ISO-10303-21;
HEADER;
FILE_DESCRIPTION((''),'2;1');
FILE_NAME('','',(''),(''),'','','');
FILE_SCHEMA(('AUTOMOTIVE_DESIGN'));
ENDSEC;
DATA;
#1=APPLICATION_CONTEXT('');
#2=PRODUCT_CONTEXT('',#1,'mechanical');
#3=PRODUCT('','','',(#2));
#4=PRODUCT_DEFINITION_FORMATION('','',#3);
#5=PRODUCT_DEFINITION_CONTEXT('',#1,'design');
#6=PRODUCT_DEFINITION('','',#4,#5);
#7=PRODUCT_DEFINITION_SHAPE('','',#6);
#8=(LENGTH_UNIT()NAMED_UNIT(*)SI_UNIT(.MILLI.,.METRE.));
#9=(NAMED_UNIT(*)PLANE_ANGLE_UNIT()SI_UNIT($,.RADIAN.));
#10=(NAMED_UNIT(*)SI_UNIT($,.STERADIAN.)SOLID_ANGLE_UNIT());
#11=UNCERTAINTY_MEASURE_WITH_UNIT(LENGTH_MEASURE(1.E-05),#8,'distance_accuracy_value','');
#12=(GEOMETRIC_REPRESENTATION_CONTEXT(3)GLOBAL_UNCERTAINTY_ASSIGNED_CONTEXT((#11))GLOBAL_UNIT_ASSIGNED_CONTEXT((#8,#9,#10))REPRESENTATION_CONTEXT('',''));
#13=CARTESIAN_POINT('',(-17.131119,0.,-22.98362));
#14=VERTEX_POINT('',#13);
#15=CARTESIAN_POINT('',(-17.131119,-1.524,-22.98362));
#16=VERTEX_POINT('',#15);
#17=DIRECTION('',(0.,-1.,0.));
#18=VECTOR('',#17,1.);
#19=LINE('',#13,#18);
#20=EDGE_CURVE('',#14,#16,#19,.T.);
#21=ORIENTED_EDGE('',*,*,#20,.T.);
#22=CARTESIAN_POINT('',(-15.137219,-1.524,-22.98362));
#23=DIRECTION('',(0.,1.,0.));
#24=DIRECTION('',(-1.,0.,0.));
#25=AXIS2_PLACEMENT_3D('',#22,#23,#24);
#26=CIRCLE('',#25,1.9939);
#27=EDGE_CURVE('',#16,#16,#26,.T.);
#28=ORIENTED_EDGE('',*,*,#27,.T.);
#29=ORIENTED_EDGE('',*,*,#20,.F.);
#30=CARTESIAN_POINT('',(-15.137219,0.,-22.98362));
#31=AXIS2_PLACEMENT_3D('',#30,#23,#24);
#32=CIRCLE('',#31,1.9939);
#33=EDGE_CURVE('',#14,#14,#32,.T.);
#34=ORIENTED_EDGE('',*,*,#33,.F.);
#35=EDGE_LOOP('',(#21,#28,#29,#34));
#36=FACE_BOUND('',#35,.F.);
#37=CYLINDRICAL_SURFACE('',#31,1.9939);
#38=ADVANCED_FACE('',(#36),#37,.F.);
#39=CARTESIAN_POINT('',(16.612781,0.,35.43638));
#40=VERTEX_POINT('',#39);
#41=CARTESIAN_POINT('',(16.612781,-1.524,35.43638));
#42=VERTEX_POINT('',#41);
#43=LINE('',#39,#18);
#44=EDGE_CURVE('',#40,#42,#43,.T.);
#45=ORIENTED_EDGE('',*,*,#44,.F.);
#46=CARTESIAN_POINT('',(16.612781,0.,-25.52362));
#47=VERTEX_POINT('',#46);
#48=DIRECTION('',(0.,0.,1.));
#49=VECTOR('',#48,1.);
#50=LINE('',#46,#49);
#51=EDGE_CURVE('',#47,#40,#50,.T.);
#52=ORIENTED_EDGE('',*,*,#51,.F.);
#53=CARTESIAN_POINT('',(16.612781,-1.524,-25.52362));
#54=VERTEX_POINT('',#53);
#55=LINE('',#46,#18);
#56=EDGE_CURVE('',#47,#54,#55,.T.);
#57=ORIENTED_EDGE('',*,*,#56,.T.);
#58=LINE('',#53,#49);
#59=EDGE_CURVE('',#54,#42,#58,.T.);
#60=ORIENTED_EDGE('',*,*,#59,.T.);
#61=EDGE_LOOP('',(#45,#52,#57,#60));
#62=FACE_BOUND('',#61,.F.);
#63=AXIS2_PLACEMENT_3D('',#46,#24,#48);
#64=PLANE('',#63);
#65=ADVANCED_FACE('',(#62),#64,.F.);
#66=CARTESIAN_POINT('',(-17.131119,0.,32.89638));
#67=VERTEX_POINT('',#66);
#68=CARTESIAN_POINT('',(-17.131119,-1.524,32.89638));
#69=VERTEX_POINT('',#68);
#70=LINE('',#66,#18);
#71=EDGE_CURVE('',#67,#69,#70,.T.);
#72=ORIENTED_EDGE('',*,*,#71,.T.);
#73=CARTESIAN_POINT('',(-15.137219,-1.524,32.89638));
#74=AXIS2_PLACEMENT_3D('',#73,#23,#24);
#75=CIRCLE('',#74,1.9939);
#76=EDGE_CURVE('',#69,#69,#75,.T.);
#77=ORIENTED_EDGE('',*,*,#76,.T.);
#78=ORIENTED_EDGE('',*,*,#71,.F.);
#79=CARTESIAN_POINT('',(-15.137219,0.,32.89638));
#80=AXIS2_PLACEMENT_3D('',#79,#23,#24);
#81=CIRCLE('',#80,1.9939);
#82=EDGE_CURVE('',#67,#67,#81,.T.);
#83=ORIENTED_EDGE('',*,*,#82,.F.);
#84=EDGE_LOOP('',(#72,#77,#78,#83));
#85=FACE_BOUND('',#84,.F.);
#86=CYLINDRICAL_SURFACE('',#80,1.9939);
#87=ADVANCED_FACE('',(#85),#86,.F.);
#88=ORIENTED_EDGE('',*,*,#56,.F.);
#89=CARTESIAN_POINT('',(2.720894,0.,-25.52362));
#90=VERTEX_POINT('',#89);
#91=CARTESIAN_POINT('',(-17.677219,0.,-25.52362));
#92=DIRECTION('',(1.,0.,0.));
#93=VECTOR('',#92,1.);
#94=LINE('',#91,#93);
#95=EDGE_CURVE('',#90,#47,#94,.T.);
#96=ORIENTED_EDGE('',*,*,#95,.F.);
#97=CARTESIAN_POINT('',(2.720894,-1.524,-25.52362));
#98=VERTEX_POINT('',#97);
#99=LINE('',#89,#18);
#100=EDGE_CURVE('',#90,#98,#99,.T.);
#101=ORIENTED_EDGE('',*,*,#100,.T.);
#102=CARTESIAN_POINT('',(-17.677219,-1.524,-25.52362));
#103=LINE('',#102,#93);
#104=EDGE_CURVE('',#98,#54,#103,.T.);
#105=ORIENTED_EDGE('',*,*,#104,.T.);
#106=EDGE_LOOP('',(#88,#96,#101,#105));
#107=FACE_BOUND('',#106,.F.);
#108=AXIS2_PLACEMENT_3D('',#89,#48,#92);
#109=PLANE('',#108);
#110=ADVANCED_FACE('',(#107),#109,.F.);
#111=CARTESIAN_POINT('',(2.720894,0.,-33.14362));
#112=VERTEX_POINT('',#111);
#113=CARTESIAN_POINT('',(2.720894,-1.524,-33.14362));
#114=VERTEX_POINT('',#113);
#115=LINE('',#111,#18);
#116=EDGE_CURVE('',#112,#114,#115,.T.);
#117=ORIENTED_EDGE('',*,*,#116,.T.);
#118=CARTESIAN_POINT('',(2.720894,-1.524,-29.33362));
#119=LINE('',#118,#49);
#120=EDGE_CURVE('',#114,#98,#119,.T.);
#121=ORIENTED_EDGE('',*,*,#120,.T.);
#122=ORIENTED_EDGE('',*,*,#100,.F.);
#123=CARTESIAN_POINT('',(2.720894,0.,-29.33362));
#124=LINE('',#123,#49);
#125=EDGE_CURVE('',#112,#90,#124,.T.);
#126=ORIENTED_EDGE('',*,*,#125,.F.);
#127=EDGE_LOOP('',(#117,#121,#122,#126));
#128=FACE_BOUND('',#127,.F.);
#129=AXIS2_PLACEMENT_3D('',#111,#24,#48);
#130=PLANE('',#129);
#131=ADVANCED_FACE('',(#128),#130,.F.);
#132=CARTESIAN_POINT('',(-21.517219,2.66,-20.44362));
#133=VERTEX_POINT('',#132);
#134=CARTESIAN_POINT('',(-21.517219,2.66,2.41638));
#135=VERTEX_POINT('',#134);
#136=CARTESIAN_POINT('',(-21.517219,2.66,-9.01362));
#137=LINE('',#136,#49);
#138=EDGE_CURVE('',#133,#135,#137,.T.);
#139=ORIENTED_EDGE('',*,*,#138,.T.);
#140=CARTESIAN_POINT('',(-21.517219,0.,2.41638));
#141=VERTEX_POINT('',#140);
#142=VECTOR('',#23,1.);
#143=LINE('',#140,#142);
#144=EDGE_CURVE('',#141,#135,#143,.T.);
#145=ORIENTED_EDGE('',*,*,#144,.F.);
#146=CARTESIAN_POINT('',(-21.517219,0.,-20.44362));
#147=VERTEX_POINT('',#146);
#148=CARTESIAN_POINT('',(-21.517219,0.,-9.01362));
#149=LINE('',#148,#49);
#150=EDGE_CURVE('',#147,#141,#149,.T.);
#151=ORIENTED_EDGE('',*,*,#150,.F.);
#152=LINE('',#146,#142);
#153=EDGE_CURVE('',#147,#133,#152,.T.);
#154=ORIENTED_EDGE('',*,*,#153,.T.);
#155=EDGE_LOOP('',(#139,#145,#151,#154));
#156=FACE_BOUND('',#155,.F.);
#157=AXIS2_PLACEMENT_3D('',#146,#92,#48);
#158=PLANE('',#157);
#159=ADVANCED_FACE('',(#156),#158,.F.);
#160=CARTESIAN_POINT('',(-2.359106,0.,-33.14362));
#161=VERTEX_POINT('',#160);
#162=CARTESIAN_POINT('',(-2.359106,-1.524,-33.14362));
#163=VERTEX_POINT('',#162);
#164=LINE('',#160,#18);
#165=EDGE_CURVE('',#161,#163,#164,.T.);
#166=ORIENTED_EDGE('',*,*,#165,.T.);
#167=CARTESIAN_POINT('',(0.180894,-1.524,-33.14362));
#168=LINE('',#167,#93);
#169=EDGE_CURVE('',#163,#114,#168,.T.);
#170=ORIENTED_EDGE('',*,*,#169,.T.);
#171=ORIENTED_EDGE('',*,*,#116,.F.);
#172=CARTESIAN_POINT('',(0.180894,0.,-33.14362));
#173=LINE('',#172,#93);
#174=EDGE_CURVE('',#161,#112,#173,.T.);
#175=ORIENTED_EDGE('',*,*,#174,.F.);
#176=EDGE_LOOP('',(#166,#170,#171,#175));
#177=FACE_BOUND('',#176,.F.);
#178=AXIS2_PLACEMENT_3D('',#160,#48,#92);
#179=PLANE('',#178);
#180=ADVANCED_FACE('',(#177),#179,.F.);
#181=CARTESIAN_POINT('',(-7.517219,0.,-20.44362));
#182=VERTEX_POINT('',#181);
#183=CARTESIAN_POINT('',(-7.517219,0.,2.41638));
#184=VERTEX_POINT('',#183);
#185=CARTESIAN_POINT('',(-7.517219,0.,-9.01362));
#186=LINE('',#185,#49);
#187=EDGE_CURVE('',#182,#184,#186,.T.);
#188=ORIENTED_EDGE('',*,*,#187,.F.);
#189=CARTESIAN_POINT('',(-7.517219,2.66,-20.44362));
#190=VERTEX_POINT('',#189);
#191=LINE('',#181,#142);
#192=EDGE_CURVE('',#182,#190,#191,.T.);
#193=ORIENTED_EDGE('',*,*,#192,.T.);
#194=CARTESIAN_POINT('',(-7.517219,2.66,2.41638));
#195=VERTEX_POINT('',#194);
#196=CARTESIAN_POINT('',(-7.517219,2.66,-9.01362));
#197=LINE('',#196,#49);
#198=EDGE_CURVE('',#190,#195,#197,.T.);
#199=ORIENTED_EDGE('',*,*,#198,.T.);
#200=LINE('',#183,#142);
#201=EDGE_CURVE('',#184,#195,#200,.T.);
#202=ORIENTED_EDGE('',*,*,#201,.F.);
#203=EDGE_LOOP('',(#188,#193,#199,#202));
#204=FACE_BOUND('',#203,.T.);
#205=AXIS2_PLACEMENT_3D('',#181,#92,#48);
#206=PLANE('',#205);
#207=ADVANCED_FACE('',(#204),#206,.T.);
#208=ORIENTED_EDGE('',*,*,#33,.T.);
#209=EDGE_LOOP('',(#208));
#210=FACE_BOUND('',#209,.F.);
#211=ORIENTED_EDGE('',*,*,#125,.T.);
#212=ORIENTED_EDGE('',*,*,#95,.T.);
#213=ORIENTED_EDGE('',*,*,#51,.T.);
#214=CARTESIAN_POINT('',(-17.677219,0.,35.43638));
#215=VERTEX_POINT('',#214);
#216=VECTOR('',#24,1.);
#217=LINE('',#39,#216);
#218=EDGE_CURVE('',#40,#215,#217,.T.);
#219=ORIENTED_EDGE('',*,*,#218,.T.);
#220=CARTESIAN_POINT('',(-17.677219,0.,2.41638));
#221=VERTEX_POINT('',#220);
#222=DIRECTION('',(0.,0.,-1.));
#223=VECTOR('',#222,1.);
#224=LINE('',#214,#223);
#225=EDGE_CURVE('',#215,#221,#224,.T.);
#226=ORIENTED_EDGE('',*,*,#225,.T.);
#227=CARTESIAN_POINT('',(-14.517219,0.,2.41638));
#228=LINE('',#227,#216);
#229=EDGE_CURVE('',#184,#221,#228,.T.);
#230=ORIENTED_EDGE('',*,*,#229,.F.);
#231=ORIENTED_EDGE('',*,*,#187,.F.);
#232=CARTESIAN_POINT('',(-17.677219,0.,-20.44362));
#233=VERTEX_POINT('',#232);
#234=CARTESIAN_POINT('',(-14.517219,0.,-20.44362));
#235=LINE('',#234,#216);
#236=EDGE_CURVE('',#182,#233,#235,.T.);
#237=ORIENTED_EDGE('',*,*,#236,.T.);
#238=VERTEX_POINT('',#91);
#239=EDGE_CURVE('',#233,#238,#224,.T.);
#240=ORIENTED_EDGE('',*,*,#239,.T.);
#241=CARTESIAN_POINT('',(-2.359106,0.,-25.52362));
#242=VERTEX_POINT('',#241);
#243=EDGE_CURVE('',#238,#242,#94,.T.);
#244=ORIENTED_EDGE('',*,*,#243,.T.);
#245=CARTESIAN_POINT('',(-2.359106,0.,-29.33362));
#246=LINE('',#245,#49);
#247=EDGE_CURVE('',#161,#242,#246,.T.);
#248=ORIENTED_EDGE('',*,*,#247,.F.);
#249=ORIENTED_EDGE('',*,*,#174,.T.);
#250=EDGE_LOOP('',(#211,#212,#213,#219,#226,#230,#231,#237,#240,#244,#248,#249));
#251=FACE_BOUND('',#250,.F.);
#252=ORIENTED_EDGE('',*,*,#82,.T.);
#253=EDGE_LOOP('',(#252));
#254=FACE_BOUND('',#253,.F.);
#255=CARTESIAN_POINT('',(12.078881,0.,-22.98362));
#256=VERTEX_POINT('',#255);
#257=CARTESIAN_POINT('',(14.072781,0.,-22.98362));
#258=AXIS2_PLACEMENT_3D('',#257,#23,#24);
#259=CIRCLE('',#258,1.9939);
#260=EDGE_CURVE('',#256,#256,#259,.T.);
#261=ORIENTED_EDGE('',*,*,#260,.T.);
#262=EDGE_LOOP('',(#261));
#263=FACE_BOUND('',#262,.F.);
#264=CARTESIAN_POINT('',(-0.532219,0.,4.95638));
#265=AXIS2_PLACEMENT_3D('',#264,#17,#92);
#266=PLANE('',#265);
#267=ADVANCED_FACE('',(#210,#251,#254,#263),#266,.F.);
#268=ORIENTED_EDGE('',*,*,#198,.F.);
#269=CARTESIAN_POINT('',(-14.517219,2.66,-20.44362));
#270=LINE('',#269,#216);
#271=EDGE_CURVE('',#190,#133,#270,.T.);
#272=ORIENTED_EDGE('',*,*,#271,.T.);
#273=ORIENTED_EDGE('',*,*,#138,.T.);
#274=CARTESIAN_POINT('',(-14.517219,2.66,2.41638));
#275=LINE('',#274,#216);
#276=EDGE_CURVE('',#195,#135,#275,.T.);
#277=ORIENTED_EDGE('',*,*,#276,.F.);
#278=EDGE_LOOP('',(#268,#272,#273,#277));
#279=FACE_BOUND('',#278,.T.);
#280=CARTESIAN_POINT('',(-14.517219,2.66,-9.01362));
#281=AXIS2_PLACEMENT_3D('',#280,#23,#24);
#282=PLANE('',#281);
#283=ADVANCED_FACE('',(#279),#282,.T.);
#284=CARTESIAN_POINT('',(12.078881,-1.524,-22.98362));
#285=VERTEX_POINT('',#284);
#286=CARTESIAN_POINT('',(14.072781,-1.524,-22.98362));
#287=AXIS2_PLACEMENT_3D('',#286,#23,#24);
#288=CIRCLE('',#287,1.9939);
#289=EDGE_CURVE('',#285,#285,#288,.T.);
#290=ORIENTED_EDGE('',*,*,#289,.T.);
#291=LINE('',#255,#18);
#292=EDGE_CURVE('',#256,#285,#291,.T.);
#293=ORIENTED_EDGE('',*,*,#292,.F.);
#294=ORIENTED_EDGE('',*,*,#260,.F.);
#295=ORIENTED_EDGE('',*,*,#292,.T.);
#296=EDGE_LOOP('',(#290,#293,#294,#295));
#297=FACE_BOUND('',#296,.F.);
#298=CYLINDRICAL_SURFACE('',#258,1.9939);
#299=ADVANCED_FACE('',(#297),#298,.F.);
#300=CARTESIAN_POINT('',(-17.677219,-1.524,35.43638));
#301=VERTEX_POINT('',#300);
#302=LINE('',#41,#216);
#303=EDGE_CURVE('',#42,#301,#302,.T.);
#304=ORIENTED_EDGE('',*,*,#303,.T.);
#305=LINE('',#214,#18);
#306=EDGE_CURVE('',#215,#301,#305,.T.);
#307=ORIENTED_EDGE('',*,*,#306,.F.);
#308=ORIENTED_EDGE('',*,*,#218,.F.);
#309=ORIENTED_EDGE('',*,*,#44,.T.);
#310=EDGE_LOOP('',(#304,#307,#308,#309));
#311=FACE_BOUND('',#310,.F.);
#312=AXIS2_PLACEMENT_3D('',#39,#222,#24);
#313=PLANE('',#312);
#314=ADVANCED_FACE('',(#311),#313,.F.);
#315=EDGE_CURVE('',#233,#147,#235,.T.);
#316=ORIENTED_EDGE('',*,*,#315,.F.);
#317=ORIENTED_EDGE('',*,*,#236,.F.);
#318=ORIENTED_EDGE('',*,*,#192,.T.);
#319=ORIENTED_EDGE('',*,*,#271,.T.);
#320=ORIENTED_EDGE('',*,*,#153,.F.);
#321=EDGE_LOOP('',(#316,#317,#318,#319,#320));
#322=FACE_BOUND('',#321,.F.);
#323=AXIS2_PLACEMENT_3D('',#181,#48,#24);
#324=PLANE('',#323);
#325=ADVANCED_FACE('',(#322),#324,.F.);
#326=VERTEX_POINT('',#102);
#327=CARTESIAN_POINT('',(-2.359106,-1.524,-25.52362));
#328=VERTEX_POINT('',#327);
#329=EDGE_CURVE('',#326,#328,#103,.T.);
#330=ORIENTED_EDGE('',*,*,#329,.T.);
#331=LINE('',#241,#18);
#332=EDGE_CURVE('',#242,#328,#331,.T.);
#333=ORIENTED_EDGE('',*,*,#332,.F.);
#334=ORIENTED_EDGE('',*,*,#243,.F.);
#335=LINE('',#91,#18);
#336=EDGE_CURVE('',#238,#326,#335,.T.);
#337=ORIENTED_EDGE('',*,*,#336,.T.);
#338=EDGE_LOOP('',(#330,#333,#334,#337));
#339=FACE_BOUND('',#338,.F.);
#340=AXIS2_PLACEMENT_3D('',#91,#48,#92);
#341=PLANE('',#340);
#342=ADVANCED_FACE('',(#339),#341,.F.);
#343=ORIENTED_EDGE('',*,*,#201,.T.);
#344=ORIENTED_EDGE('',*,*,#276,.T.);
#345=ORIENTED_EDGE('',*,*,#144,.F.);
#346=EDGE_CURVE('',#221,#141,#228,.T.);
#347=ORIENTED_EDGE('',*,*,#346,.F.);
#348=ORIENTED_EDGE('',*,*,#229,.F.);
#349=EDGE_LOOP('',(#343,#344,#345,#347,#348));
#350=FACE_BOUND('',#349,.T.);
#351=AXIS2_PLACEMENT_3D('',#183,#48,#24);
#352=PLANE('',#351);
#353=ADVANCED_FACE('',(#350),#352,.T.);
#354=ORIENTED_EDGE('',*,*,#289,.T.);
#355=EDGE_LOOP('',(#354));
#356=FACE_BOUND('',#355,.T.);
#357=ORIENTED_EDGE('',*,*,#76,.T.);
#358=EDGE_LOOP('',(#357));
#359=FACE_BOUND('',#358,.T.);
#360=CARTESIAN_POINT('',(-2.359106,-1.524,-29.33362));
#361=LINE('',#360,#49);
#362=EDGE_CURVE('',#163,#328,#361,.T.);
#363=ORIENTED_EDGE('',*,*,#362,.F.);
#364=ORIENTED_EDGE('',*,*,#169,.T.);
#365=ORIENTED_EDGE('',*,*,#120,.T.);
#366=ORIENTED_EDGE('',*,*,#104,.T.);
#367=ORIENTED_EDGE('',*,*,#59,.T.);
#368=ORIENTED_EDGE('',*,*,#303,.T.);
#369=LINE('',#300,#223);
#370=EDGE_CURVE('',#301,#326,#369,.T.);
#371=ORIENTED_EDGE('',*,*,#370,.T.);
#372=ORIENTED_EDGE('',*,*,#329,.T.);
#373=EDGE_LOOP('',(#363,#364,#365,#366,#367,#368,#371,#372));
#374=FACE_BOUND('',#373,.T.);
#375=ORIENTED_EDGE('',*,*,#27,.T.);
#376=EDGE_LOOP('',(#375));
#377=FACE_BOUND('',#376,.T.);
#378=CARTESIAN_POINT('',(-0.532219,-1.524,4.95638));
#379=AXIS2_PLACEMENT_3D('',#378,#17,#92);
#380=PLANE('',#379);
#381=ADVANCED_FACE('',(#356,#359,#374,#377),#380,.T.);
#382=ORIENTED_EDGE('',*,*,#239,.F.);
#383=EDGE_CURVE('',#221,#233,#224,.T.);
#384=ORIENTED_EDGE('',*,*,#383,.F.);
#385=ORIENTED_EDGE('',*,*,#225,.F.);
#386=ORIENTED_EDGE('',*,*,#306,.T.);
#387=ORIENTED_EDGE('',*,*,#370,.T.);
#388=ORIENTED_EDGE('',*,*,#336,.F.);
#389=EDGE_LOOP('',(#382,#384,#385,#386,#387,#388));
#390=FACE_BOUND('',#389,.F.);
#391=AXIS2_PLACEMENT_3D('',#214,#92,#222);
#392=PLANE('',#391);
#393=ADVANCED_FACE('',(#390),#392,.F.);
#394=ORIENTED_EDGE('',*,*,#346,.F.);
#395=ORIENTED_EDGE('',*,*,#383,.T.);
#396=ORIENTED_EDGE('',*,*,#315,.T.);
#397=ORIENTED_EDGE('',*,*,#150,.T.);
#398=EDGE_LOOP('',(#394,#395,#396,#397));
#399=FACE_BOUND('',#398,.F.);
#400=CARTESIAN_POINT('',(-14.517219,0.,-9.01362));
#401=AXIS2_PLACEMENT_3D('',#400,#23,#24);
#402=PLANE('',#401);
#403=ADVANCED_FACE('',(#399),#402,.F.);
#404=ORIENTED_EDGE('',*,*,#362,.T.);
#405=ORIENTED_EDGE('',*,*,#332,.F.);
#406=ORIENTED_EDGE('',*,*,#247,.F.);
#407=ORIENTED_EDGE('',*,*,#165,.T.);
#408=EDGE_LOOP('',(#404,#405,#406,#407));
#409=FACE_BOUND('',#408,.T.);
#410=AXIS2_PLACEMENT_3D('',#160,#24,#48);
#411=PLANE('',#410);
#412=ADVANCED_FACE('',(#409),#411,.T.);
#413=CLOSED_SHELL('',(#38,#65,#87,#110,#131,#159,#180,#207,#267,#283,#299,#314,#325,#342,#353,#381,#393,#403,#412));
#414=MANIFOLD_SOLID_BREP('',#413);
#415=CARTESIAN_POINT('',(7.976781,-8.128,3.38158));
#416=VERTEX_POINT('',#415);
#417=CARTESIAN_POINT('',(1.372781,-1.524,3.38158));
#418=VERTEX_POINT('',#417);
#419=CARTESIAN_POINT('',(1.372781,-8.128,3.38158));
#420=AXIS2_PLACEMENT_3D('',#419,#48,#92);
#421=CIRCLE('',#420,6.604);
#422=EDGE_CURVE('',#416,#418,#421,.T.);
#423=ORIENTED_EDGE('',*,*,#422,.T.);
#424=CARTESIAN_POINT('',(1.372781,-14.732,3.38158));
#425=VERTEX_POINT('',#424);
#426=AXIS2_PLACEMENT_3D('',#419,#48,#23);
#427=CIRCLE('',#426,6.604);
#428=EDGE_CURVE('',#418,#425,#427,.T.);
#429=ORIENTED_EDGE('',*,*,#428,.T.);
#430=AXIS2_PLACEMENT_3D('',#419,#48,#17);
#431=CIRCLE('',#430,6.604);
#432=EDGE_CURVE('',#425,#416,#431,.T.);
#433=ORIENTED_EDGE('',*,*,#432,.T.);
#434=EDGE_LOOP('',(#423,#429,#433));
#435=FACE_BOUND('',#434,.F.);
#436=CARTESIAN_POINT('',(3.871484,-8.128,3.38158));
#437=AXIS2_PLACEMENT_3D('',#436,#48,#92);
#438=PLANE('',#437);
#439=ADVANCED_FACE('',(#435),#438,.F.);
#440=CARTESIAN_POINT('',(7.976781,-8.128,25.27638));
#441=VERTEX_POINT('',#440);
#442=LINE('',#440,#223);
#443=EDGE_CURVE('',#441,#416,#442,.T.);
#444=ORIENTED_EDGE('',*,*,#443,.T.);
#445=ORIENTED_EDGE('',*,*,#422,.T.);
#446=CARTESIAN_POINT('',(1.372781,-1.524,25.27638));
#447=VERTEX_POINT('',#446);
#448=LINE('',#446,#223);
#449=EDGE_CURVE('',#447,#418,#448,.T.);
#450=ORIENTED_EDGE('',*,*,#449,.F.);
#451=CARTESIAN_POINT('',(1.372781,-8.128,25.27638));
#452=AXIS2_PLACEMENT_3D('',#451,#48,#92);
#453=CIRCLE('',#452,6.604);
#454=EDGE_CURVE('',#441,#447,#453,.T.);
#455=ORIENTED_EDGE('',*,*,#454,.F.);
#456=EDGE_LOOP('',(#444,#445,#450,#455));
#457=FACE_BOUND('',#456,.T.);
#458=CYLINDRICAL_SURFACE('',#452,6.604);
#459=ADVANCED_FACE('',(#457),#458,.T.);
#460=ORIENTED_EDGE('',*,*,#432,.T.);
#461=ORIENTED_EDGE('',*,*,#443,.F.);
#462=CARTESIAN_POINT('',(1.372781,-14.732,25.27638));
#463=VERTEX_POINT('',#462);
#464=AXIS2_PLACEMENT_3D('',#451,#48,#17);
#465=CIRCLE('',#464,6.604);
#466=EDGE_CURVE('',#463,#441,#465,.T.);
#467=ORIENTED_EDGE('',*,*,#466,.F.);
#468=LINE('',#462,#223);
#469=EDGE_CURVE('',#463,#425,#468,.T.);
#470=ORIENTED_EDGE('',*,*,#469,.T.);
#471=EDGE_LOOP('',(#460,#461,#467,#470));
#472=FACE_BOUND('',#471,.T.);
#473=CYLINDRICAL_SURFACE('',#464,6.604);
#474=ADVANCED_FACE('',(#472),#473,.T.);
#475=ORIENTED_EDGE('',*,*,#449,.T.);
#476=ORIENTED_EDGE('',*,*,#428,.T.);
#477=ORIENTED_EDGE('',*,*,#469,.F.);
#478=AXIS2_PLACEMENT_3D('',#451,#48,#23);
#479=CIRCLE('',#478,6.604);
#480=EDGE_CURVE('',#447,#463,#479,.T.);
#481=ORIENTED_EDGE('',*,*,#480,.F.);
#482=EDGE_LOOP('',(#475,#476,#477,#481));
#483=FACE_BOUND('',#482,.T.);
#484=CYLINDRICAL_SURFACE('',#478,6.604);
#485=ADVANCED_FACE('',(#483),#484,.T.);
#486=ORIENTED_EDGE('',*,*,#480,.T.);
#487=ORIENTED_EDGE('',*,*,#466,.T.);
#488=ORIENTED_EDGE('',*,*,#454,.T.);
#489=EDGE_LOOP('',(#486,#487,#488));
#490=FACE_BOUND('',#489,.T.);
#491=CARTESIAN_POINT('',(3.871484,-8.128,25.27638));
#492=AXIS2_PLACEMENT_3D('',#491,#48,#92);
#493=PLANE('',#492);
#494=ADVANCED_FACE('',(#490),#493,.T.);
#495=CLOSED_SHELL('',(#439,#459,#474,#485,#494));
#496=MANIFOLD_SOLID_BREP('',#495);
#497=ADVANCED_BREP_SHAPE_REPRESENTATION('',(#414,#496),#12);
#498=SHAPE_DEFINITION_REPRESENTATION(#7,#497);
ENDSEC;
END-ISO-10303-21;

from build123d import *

# Parameters (mm, degrees)
F0_W     = 5.08
F0_H     = 7.62
F1_DEPTH = 1.524
F2_W     = 14
F2_H     = 22.86
F3_DEPTH = 2.66
F6_DEPTH = 21.8948
F7_R     = 1.9939
F8_DEPTH = 14.733


with BuildPart() as f1:
    # F0 (on Front) → F1 (new body)
    with BuildSketch(Plane.XZ):
        Polygon((16.6127808136, 35.4363795967), (-17.6772191864, 35.4363795967), (-17.6772191864, -25.5236204033), (-2.3591062054, -25.5236204033), (2.7208937946, -25.5236204033), (16.6127808136, -25.5236204033), align=None)
        with Locations((0.1808937946, -29.3336204033)):
            Rectangle(F0_W, F0_H)
    extrude(amount=F1_DEPTH)

    # F2 (on face) → F3 (join)
    with BuildSketch(Plane(origin=(0, 0, 0), x_dir=(-1, 0, 0), z_dir=(0, 1, 0))):
        with Locations((14.5172191864, -9.0136204033)):
            Rectangle(F2_W, F2_H)
    extrude(amount=F3_DEPTH)

    # F7 (on face) → F8 (cut, through all)
    with BuildSketch(Plane(origin=(0, 0, 0), x_dir=(-1, 0, 0), z_dir=(0, 1, 0))):
        with Locations((15.1372191864, 32.8963795967)):
            Circle(F7_R)
        with Locations((15.1372191864, -22.9836204033)):
            Circle(F7_R)
        with Locations((-14.0727808136, -22.9836204033)):
            Circle(F7_R)
    extrude(amount=-F8_DEPTH, mode=Mode.SUBTRACT)


with BuildPart() as f6:
    # F5 (on offset) → F6 (new body)
    with BuildSketch(Plane.XY.offset(25.2763795967)):
        with BuildLine():
            ThreePointArc((7.9767808136, -8.128), (6.0425139965, -3.458266817), (1.3727808136, -1.524))
            Line((1.3727808136, -1.524), (1.3727808136, -14.732))
            ThreePointArc((1.3727808136, -14.732), (6.0425139965, -12.797733183), (7.9767808136, -8.128))
        make_face()
        with BuildLine():
            Line((1.3727808136, -14.732), (1.3727808136, -1.524))
            ThreePointArc((1.3727808136, -1.524), (-5.2312191864, -8.128), (1.3727808136, -14.732))
        make_face()
    extrude(amount=-F6_DEPTH)


solid = Compound([f1.part, f6.part])
